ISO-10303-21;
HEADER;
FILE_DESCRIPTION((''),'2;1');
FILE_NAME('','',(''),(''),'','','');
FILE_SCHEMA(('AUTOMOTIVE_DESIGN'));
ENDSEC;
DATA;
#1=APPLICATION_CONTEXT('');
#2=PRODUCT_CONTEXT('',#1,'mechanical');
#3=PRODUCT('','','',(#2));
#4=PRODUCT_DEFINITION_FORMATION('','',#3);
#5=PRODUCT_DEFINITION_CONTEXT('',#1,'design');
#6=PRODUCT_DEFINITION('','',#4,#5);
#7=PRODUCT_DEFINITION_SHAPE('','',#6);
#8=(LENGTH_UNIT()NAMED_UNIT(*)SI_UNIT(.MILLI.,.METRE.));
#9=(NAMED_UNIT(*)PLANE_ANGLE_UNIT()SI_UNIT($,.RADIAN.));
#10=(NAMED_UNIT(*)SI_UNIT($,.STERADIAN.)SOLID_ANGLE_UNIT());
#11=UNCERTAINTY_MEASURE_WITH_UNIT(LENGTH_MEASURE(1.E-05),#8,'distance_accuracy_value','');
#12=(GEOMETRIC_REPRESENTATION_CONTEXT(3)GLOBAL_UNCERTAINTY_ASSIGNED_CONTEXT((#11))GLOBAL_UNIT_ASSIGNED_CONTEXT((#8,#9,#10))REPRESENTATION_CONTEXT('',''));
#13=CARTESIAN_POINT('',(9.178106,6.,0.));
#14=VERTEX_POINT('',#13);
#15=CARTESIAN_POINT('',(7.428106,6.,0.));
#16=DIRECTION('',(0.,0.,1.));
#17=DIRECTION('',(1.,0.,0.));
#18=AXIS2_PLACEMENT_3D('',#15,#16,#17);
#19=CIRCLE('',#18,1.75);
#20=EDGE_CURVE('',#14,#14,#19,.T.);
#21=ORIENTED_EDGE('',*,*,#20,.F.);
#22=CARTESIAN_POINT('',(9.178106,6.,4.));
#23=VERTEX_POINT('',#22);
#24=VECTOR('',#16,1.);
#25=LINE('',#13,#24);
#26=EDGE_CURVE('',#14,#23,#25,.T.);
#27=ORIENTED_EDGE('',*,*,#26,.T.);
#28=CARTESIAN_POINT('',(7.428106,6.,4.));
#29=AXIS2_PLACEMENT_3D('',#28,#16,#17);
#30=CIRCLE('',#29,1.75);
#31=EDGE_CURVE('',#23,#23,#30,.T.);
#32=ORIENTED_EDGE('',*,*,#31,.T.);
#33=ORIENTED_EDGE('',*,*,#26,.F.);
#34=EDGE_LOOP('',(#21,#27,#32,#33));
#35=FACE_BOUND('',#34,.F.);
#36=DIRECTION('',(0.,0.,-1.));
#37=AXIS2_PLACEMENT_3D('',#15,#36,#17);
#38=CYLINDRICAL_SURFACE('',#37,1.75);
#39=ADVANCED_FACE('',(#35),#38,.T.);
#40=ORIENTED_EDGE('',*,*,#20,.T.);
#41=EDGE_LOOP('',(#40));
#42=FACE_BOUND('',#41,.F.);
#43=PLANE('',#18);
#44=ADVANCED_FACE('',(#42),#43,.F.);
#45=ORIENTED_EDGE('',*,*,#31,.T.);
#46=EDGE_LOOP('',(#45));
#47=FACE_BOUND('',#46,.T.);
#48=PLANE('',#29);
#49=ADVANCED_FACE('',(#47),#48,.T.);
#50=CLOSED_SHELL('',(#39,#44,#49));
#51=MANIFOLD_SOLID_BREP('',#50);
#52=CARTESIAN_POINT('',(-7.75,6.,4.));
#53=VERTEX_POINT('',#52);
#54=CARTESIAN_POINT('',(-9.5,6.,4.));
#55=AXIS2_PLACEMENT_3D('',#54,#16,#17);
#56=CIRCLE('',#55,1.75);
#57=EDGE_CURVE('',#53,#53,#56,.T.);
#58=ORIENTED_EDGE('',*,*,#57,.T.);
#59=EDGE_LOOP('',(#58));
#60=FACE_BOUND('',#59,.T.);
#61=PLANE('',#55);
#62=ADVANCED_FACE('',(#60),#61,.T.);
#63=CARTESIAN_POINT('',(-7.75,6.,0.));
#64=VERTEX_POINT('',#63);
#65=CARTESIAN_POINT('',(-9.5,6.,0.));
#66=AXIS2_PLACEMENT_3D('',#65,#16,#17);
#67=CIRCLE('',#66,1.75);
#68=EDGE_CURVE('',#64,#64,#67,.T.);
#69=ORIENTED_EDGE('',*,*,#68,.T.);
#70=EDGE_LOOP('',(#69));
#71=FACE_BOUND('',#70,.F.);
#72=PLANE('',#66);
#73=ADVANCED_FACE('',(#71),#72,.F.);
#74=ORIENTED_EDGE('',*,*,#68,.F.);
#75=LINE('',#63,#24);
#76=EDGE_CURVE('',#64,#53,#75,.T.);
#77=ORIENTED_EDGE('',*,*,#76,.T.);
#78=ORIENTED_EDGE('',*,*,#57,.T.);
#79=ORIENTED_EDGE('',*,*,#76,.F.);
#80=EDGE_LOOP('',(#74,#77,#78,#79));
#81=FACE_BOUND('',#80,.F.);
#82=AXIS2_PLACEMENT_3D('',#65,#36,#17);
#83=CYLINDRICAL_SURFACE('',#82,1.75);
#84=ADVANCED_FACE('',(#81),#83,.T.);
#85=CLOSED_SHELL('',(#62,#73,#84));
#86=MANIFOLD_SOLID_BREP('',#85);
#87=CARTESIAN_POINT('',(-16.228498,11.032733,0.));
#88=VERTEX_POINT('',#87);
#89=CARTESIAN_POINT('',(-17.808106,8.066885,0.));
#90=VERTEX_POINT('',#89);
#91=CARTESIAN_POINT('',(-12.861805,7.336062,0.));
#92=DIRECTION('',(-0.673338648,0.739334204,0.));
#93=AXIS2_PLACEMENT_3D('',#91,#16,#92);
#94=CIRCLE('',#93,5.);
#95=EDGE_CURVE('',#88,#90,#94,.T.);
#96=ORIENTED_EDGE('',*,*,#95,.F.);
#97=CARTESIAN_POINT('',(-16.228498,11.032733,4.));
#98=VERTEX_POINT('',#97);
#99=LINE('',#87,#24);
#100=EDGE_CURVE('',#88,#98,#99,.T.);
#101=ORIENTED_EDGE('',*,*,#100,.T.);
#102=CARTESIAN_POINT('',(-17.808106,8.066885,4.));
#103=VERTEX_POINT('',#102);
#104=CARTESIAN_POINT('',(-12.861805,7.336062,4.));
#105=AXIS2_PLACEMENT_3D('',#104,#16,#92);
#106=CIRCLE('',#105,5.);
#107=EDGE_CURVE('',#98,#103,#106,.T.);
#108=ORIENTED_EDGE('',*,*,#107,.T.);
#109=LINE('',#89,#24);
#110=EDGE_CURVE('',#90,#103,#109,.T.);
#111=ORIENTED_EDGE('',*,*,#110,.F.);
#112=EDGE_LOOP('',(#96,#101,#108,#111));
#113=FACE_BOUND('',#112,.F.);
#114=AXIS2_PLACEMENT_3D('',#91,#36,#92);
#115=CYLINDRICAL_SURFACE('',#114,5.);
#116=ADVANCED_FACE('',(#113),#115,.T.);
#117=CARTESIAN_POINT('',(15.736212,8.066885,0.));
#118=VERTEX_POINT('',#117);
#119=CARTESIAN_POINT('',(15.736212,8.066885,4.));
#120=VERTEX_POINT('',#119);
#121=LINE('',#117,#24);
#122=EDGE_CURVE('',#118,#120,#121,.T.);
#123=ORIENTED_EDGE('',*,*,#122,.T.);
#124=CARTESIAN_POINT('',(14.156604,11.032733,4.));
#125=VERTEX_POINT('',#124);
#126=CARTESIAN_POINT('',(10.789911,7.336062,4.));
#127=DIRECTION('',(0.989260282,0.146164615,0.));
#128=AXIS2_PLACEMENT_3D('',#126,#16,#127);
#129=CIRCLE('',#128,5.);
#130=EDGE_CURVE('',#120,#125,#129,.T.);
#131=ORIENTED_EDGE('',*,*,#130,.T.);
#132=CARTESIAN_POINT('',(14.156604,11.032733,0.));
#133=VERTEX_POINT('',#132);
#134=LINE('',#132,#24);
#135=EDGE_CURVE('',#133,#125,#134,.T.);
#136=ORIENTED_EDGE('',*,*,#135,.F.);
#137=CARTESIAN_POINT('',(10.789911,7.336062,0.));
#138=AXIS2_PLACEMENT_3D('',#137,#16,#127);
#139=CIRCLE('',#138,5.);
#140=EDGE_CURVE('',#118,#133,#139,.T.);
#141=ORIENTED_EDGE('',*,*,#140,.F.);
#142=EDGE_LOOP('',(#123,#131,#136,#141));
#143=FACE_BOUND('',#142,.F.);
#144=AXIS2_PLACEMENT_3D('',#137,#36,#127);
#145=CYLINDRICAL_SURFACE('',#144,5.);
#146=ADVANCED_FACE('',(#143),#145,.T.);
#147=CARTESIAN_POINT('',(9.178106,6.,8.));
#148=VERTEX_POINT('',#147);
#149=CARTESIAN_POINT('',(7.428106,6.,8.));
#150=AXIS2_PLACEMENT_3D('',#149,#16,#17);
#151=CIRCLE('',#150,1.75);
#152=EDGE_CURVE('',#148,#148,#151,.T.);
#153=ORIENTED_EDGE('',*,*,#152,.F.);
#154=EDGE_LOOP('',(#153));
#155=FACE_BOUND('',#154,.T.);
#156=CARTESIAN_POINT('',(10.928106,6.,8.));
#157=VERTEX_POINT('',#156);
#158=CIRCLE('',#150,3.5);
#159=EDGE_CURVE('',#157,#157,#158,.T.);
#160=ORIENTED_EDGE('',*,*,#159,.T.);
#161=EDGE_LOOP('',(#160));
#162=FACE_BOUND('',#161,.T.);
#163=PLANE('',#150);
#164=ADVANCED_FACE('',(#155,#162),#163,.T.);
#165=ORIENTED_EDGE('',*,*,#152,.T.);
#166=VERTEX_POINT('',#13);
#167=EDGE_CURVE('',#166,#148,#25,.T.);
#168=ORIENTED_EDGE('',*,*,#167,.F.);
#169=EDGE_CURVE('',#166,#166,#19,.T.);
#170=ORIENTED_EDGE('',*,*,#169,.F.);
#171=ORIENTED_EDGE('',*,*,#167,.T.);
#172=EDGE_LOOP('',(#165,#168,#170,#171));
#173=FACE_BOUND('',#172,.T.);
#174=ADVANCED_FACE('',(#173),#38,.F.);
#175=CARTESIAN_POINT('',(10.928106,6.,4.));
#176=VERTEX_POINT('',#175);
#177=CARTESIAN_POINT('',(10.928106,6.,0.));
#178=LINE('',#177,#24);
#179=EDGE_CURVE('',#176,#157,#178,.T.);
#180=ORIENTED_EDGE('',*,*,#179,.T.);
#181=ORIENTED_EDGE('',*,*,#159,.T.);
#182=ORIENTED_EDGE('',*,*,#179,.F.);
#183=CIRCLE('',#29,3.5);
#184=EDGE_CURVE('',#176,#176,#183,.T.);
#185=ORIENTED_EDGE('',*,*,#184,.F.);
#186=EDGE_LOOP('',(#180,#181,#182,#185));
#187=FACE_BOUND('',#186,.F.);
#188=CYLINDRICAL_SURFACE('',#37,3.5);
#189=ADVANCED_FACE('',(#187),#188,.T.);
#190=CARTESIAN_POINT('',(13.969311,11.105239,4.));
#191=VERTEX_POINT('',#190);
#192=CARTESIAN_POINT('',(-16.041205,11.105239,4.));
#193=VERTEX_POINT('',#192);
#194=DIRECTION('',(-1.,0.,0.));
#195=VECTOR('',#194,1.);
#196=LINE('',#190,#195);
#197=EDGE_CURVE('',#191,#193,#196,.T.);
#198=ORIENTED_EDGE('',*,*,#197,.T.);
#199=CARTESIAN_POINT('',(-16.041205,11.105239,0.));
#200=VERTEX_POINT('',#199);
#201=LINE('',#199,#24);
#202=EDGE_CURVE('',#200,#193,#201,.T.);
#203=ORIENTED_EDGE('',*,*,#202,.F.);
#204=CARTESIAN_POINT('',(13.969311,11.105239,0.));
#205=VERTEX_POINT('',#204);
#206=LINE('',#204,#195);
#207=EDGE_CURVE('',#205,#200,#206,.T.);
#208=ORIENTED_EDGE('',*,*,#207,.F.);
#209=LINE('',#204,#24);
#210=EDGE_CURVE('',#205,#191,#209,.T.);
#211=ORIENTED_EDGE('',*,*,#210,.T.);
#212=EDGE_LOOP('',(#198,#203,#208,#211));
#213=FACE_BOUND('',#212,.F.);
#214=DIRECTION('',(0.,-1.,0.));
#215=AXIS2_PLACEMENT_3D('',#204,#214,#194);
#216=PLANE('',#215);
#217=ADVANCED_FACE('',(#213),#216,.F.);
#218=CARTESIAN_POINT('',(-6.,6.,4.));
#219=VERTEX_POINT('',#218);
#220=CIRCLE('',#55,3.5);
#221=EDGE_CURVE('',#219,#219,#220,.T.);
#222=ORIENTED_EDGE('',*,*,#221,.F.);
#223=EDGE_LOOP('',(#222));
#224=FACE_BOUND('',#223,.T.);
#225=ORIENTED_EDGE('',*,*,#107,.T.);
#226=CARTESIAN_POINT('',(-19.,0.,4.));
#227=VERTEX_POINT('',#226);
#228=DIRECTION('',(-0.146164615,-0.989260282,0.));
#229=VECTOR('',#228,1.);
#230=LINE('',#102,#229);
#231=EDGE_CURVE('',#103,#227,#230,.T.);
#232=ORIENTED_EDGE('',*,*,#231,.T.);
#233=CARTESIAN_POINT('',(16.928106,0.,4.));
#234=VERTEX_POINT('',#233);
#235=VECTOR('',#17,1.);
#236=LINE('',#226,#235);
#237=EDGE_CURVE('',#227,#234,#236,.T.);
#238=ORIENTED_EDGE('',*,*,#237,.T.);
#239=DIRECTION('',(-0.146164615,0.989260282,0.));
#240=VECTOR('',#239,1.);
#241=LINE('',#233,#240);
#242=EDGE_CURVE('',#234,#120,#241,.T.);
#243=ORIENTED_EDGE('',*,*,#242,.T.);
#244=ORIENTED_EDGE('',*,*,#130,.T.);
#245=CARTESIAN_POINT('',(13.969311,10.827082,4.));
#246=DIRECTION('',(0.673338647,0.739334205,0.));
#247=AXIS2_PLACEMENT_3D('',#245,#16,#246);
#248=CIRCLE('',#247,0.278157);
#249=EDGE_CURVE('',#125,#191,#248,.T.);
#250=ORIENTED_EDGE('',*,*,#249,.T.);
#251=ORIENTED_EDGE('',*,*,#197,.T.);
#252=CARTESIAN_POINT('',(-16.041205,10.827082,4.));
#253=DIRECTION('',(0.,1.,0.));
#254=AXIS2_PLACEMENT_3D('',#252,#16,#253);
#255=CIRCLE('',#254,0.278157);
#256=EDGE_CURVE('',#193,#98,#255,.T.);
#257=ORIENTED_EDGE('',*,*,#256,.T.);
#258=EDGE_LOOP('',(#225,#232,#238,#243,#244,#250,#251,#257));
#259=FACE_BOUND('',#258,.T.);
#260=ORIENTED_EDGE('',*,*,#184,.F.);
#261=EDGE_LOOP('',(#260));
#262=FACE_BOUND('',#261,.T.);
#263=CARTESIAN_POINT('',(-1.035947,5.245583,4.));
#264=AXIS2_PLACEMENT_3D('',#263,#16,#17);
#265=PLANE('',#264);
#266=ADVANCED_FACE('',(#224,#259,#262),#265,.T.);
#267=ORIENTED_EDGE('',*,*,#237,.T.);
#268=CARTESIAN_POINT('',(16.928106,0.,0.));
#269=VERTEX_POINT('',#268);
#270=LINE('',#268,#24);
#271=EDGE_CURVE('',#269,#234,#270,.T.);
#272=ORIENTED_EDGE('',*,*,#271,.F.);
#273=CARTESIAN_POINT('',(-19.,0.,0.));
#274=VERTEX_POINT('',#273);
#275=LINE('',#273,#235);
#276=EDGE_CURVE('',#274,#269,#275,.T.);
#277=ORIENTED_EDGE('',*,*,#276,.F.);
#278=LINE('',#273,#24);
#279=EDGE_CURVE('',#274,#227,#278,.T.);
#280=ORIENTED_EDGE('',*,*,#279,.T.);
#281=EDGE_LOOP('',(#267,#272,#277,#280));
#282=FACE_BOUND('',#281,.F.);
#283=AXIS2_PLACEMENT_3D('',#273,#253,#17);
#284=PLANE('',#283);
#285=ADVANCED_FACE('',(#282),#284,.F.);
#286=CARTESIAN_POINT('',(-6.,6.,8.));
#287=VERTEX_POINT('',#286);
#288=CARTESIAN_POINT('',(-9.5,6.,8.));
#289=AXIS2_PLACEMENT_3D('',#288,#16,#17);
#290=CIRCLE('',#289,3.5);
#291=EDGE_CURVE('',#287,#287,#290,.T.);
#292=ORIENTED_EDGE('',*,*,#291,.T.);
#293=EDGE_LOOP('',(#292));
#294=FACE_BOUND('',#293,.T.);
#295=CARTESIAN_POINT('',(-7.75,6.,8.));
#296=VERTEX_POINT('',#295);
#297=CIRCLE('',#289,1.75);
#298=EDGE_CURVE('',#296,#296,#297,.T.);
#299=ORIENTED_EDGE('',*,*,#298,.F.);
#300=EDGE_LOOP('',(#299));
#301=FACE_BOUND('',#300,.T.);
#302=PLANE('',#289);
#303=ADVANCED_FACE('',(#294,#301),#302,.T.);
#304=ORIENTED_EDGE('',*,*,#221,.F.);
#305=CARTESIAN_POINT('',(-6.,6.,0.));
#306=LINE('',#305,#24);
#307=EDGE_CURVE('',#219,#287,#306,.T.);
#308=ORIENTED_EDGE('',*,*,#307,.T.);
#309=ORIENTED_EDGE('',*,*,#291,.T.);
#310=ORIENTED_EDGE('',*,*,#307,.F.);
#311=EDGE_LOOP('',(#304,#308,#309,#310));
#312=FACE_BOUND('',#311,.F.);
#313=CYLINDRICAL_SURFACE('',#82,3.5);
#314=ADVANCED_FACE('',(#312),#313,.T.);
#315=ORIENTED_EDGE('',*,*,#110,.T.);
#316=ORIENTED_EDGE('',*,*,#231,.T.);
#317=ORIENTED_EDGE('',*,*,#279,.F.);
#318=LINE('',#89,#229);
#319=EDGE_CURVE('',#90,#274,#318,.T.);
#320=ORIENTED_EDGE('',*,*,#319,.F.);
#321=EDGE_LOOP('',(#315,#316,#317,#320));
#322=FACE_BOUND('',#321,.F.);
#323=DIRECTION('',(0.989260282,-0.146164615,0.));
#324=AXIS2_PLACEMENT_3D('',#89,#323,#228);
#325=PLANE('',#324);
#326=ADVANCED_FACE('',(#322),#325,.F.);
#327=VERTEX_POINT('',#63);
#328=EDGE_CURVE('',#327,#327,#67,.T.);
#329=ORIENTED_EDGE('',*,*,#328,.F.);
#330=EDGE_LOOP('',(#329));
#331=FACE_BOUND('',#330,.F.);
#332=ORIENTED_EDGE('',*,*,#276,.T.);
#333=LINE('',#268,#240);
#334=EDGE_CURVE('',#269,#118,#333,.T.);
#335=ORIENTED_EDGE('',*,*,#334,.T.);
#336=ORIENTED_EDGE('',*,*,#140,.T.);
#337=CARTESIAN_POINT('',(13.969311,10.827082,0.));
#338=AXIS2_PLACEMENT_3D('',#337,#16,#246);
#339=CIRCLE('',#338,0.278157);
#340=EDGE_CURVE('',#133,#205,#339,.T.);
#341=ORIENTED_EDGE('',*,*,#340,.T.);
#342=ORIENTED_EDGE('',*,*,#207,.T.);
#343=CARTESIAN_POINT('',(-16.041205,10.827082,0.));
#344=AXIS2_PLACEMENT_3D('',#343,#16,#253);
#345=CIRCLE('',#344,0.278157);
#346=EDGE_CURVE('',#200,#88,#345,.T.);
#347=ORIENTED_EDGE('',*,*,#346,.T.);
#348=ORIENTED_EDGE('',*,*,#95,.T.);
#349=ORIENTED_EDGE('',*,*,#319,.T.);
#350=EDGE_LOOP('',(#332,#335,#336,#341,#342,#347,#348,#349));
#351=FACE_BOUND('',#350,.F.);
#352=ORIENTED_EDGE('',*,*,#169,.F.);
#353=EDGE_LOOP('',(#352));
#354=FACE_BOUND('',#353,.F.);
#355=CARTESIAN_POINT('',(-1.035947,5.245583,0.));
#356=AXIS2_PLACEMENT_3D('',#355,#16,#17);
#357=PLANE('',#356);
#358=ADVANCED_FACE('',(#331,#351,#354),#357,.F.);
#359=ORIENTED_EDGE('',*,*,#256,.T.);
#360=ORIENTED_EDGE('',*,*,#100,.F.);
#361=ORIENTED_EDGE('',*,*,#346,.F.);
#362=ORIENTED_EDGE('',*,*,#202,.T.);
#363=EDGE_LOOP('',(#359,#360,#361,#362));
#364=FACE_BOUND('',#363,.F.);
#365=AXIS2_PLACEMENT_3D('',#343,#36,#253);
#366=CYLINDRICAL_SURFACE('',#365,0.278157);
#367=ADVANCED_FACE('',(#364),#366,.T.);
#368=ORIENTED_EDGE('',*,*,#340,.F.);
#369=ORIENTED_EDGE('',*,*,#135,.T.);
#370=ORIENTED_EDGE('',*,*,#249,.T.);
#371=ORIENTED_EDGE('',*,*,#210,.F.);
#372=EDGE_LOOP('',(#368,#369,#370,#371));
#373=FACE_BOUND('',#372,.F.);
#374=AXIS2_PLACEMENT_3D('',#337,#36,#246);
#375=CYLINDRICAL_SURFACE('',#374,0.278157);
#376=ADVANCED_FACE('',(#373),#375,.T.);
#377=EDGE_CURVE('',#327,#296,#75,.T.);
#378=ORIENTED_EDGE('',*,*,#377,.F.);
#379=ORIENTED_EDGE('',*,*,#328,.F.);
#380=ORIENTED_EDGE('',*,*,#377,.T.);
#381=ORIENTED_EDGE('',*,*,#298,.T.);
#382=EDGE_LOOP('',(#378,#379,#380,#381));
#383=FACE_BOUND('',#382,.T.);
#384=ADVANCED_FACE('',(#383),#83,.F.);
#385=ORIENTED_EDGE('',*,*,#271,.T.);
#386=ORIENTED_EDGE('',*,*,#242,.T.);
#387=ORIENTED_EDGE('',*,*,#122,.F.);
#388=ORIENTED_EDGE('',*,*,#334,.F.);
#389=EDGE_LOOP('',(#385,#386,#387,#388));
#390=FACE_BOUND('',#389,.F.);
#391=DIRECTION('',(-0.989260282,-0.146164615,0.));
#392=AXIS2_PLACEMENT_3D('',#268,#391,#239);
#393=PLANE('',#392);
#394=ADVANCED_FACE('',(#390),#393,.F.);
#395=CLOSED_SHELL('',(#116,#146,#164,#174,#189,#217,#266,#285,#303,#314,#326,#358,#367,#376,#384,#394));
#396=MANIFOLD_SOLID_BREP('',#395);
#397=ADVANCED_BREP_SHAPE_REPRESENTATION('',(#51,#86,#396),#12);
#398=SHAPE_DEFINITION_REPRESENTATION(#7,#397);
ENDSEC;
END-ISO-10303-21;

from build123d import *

# Parameters (mm, degrees)
F0_R     = 3.5
F1_DEPTH = 4
F0_R_2   = 1.75
F2_DEPTH = 4
F3_DEPTH = 8


# Not quite as in the source:
# - a feature names something its author has since deleted; it is built from what else it names


with BuildPart() as f1:
    # F0 (on Top) → F1 (new body)
    with BuildSketch(Plane.XY):
        with BuildLine():
            Line((-17.8081062952, 8.0668847322), (-19, 0))
            Line((-19, 0), (16.9281060712, 0))
            Line((16.9281060712, 0), (15.7362123664, 8.0668847322))
            ThreePointArc((15.7362123664, 8.0668847322), (15.2030202368, 9.6864800202), (14.1566041965, 11.0327326766))
            ThreePointArc((14.1566041965, 11.0327326766), (14.0697297328, 11.0864795446), (13.9693106268, 11.1052385806))
            Line((13.9693106268, 11.1052385806), (-16.0412045557, 11.1052385806))
            ThreePointArc((-16.0412045557, 11.1052385806), (-16.1416236616, 11.0864795446), (-16.2284981253, 11.0327326766))
            ThreePointArc((-16.2284981253, 11.0327326766), (-17.2749141656, 9.6864800202), (-17.8081062952, 8.0668847322))
        make_face()
        with Locations((-9.5, 6)):
            Circle(F0_R, mode=Mode.SUBTRACT)
        with Locations((7.4281060712, 6)):
            Circle(F0_R, mode=Mode.SUBTRACT)
    extrude(amount=F1_DEPTH)

    # F0 (on Top) → F3 (join)
    with BuildSketch(Plane.XY):
        with Locations((-9.5, 6)):
            Circle(F0_R)
        with Locations((-9.5, 6)):
            Circle(F0_R_2, mode=Mode.SUBTRACT)
        with Locations((7.4281060712, 6)):
            Circle(F0_R)
        with Locations((7.4281060712, 6)):
            Circle(F0_R_2, mode=Mode.SUBTRACT)
    extrude(amount=F3_DEPTH)


with BuildPart() as f2:
    # F0 (on Top) → F2 (new body)
    with BuildSketch(Plane.XY):
        with Locations((-9.5, 6)):
            Circle(F0_R_2)
    extrude(amount=F2_DEPTH)


with BuildPart() as f2b:
    # F0 (on Top) → F2, piece 2 (new body)
    with BuildSketch(Plane.XY):
        with Locations((7.4281060712, 6)):
            Circle(F0_R_2)
    extrude(amount=F2_DEPTH)


solid = Compound([f1.part, f2.part, f2b.part])
